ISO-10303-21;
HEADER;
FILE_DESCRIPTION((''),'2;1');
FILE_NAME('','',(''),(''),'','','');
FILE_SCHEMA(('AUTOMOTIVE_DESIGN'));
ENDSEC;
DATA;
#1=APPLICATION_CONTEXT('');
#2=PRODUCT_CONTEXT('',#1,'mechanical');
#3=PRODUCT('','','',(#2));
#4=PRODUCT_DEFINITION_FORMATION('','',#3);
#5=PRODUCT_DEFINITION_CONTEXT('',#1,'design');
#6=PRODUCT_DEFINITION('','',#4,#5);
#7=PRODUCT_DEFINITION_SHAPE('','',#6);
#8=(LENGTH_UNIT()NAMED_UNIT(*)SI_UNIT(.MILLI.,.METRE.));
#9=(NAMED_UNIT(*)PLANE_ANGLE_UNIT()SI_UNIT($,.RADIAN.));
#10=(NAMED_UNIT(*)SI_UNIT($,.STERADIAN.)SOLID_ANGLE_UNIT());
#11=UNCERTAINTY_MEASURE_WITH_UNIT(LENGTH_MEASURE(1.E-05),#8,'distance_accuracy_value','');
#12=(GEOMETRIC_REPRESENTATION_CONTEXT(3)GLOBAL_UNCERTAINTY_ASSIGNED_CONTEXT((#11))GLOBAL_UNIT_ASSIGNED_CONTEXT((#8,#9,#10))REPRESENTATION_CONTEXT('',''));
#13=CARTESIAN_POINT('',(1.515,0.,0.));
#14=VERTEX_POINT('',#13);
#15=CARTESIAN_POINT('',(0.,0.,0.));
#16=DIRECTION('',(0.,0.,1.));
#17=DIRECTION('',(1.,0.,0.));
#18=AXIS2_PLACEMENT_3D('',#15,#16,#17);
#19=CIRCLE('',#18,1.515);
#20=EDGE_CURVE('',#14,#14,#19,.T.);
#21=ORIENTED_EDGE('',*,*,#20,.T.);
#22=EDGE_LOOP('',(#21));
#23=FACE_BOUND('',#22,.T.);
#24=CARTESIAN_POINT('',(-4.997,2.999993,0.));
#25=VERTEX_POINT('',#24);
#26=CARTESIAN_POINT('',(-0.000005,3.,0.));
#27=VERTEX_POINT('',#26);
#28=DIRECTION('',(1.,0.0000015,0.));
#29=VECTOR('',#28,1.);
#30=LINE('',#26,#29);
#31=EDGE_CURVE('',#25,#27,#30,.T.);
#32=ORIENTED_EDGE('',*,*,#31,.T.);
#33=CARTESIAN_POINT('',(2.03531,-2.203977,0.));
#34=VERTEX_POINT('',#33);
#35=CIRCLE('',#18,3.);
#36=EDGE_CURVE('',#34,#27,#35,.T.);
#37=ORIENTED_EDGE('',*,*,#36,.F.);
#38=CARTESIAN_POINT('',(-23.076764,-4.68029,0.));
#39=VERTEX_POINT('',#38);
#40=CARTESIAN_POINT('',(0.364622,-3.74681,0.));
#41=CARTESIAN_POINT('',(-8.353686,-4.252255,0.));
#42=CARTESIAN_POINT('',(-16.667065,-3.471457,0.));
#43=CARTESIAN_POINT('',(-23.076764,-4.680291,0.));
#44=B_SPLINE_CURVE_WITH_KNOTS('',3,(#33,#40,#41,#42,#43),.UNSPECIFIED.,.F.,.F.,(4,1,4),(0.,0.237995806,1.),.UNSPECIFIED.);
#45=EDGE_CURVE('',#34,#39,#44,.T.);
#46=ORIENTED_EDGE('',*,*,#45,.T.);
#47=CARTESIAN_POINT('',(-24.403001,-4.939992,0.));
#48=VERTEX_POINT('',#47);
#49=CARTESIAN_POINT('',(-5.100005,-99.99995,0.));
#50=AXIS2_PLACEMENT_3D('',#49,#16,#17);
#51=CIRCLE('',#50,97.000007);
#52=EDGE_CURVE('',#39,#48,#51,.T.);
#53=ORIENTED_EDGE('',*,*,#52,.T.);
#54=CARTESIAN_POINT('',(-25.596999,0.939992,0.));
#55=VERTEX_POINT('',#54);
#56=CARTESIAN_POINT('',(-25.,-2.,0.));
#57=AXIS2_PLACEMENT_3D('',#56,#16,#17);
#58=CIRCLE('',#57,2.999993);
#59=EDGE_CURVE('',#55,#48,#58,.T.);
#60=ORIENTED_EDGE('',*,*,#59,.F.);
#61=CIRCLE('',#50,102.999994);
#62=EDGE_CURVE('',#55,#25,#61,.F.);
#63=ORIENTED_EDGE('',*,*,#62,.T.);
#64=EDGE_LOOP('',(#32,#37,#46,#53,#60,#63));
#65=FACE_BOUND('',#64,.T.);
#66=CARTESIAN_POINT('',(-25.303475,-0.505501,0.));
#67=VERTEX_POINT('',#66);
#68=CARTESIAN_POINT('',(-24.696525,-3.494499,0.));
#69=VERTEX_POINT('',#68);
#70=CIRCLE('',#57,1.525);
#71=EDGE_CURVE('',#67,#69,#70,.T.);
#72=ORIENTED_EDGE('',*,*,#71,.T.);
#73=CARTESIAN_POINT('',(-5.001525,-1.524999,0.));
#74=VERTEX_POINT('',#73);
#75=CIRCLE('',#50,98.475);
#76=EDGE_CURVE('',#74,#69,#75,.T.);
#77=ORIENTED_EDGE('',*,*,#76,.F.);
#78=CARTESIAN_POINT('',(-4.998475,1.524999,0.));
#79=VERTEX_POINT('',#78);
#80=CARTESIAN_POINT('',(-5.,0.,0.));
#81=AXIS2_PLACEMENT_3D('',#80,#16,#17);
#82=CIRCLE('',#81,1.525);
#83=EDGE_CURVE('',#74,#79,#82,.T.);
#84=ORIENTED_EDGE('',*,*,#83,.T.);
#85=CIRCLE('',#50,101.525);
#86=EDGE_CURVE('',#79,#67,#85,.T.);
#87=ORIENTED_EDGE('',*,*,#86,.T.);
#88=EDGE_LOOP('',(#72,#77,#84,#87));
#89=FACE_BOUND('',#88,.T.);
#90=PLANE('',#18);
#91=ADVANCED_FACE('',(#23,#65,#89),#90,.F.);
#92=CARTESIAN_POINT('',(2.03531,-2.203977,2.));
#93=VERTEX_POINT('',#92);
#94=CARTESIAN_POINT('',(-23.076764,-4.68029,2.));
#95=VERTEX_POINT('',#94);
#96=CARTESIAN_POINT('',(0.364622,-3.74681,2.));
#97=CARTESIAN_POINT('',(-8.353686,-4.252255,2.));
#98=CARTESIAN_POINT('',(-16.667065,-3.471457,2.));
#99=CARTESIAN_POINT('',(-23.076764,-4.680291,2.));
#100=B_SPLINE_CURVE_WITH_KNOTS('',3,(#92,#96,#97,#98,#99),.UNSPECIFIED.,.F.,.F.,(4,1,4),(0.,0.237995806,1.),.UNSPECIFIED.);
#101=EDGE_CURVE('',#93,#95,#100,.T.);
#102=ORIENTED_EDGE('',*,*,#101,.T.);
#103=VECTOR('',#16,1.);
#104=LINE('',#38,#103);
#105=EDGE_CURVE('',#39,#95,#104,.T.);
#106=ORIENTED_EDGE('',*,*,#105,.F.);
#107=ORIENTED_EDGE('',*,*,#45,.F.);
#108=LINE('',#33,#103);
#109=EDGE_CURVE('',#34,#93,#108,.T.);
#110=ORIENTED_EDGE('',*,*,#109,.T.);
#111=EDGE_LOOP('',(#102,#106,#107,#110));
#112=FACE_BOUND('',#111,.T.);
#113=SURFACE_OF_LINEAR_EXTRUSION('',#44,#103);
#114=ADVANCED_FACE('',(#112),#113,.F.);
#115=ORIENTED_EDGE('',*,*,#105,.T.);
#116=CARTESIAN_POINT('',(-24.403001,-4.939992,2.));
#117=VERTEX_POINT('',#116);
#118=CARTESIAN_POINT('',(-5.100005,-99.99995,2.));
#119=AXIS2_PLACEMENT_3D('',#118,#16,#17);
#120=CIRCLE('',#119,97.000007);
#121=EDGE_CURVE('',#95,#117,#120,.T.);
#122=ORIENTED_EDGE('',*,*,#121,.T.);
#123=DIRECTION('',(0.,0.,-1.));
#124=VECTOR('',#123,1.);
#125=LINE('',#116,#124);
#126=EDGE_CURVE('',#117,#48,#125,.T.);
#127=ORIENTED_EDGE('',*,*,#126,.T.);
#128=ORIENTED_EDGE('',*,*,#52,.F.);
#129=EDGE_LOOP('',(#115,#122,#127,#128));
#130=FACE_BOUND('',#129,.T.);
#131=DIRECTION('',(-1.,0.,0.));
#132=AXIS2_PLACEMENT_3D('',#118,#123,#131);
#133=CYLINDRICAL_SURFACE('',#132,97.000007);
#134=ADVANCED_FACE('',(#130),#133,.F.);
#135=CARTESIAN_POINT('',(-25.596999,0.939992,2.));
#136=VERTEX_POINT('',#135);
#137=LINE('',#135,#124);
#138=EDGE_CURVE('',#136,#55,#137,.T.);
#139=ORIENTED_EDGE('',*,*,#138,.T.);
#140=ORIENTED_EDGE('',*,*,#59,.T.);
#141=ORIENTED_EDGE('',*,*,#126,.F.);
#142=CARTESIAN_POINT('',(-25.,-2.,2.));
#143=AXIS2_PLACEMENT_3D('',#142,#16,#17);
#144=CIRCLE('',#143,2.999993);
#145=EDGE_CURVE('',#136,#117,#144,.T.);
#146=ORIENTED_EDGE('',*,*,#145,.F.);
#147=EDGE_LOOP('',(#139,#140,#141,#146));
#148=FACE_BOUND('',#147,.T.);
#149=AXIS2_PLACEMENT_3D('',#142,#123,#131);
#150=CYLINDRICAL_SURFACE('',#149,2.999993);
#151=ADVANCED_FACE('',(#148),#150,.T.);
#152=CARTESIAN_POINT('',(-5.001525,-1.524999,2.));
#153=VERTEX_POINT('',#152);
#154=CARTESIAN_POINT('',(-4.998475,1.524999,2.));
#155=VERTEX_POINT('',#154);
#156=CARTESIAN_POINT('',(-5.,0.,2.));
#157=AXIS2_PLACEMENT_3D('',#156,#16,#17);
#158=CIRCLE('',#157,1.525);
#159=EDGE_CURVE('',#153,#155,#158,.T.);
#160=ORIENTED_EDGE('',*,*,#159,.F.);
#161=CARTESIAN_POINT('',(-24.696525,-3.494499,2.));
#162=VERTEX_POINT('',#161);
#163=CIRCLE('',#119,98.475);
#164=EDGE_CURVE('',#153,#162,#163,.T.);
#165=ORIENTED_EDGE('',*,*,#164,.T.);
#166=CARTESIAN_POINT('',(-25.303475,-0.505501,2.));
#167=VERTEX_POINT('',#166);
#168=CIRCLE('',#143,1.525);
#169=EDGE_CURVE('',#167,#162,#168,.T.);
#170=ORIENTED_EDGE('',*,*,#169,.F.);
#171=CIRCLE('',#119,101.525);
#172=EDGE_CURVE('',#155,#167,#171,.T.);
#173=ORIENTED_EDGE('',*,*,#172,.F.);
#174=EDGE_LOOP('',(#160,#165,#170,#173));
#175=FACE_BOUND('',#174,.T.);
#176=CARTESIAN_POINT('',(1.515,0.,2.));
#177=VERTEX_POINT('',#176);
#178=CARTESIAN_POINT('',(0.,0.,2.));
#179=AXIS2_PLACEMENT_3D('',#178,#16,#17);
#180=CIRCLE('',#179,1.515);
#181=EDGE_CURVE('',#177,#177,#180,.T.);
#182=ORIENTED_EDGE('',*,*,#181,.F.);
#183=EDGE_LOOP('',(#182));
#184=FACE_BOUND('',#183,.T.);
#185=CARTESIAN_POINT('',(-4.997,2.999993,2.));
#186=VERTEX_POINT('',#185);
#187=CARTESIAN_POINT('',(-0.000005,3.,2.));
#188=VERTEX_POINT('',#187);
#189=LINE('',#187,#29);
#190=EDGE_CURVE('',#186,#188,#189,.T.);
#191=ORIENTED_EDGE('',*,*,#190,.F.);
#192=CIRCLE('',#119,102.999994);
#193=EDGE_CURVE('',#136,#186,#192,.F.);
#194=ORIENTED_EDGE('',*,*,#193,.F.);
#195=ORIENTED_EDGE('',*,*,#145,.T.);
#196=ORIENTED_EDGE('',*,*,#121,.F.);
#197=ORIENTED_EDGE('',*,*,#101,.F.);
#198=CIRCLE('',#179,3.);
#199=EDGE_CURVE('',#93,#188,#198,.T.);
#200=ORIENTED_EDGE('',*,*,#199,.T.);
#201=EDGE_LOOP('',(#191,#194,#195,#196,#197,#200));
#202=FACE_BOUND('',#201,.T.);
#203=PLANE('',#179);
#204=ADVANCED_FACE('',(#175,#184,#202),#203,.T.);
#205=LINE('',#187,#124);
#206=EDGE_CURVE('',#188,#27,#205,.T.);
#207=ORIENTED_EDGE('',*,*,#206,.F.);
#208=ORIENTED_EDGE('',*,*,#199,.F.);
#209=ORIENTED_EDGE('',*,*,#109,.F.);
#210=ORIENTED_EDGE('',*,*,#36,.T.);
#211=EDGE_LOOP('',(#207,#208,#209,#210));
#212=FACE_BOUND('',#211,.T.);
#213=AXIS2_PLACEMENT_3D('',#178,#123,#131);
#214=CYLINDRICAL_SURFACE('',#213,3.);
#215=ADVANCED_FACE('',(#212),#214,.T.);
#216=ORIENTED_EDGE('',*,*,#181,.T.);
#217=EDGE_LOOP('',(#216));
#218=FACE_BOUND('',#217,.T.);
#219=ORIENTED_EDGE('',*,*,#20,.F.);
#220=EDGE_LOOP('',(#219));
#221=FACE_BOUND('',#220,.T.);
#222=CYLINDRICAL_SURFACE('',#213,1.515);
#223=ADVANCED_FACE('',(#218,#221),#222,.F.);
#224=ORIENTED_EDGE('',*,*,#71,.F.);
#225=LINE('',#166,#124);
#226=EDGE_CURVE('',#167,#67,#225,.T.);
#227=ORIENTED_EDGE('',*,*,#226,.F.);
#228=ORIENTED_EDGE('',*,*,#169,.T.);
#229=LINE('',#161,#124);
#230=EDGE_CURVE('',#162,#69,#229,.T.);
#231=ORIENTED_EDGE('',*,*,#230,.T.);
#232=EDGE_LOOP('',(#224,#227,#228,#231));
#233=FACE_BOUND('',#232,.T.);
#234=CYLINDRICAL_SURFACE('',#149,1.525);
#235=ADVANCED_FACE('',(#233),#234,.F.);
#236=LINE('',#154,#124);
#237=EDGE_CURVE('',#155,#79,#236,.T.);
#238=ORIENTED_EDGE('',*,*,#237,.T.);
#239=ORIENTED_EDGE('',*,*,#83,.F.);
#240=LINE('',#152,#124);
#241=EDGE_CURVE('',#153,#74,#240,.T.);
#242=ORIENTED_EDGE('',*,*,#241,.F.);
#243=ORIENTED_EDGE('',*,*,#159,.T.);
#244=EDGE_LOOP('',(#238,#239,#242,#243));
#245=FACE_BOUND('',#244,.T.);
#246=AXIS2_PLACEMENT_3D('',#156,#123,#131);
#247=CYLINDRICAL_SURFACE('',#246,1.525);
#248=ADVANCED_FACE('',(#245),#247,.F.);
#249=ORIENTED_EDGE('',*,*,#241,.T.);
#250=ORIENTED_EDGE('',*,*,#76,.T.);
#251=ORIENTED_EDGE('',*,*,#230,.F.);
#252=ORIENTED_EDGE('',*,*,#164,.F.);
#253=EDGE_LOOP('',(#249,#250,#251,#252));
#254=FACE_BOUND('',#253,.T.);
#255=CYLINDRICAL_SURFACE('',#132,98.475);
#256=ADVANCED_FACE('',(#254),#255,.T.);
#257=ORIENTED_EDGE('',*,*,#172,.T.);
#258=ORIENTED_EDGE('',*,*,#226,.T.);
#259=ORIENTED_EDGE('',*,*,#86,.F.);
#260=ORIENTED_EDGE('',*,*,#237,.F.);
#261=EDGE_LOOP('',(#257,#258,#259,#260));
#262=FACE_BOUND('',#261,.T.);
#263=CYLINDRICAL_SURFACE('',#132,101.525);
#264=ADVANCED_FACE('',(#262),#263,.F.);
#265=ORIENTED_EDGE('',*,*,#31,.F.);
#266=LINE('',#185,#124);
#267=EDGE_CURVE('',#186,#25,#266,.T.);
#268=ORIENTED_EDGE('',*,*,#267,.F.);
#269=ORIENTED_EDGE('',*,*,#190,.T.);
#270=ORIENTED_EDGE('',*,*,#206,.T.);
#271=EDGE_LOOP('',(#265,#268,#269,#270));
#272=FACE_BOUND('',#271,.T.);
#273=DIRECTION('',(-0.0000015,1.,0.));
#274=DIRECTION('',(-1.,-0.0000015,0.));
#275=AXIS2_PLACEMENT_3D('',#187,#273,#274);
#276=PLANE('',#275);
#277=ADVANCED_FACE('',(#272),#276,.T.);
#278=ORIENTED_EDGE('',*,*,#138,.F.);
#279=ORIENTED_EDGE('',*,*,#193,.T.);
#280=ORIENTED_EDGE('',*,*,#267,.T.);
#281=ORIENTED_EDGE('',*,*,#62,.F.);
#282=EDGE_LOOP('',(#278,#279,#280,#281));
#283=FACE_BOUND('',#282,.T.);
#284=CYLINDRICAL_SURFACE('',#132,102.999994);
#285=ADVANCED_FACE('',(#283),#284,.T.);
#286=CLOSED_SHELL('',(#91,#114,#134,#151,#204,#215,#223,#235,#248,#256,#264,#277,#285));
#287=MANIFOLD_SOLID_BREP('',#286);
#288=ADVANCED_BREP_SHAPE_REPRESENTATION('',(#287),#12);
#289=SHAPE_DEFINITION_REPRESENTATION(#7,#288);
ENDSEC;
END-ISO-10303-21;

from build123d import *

# Parameters (mm, degrees)
SKETCH_2_R          = 1.515
EXTRUDE_2_DEPTH     = 2
EXTRUDE_START       = -2
EXTRUDE_3_OUTLINE_R = 1.515
EXTRUDE_3_DEPTH     = 2


with BuildPart() as part:
    # 草图2 → 凸台-拉伸2 (new body)
    with BuildSketch(Plane.XY):
        with BuildLine():
            Line((-4.501e-06, 3), (-4.996999856, 2.999992503))
            ThreePointArc((-4.996999856, 2.999992503), (-15.348887441, 2.488874451), (-25.596998621, 0.939992446))
            ThreePointArc((-25.596998621, 0.939992446), (-27.93999256, -2.596998062), (-24.403001606, -4.939991329))
            ThreePointArc((-24.403001606, -4.939991329), (-14.75186649, -3.481335038), (-5.003000142, -2.999990956))
            ThreePointArc((-5.003000143, -2.999991003), (-5.001500071, -2.999992128), (-5, -2.999994003))
            Line((-5, -2.999994003), (-3.598e-06, -3))
            ThreePointArc((-3.598e-06, -3), (3, 4.51e-07), (-4.501e-06, 3))
        make_face()
        Circle(SKETCH_2_R, mode=Mode.SUBTRACT)
        with BuildLine():
            ThreePointArc((-4.998474924, 1.524999237), (-3.475000763, -0.001525076), (-5.001525076, -1.524999237))
            ThreePointArc((-5.001525076, -1.524999237), (-14.898633731, -2.013662689), (-24.696525076, -3.494499237))
            ThreePointArc((-24.696525076, -3.494499237), (-26.494499237, -2.303474924), (-25.303474924, -0.505500763))
            ThreePointArc((-25.303474924, -0.505500763), (-15.202120074, 1.021200741), (-4.998474924, 1.524999237))
        make_face(mode=Mode.SUBTRACT)
    extrude(amount=EXTRUDE_2_DEPTH)

    # 凸台-拉伸3: read off the stored shape, not the designer's step
    # 凸台-拉伸3 outline → 凸台-拉伸3 (add)
    with BuildSketch(Plane.XY.offset(2).offset(EXTRUDE_START)):
        with BuildLine():
            ThreePointArc((-25.596998507, 0.939991888), (-27.939991888, -2.596998507), (-24.403001493, -4.939991888))
            ThreePointArc((-24.403001493, -4.939991888), (-23.740335049, -4.807830903), (-23.076763905, -4.680290004))
            add(Edge.make_bspline(
                [(2.0353099, -2.203976772), (0.364621675, -3.746809857), (-8.353685573, -4.252255019), (-16.667064883, -3.471457034), (-23.076763905, -4.680290004)],
                knots=[0, 0, 0, 0, 0.237995806, 1, 1, 1, 1], degree=3))
            ThreePointArc((2.0353099, -2.203976772), (2.79391492, 1.092721109), (-4.501e-06, 3))
            Line((-4.501e-06, 3), (-4.996999856, 2.999992413))
            ThreePointArc((-4.996999856, 2.999992413), (-15.348887454, 2.48887454), (-25.596998507, 0.939991888))
        make_face()
        with BuildLine():
            ThreePointArc((-24.696525076, -3.494499237), (-26.494499237, -2.303474924), (-25.303474924, -0.505500763))
            ThreePointArc((-25.303474924, -0.505500763), (-15.202120074, 1.021200741), (-4.998474924, 1.524999237))
            ThreePointArc((-4.998474924, 1.524999237), (-3.475000763, -0.001525076), (-5.001525076, -1.524999237))
            ThreePointArc((-5.001525076, -1.524999237), (-14.898633731, -2.013662689), (-24.696525076, -3.494499237))
        make_face(mode=Mode.SUBTRACT)
        Circle(EXTRUDE_3_OUTLINE_R, mode=Mode.SUBTRACT)
    extrude(amount=EXTRUDE_3_DEPTH)


solid = part.part
